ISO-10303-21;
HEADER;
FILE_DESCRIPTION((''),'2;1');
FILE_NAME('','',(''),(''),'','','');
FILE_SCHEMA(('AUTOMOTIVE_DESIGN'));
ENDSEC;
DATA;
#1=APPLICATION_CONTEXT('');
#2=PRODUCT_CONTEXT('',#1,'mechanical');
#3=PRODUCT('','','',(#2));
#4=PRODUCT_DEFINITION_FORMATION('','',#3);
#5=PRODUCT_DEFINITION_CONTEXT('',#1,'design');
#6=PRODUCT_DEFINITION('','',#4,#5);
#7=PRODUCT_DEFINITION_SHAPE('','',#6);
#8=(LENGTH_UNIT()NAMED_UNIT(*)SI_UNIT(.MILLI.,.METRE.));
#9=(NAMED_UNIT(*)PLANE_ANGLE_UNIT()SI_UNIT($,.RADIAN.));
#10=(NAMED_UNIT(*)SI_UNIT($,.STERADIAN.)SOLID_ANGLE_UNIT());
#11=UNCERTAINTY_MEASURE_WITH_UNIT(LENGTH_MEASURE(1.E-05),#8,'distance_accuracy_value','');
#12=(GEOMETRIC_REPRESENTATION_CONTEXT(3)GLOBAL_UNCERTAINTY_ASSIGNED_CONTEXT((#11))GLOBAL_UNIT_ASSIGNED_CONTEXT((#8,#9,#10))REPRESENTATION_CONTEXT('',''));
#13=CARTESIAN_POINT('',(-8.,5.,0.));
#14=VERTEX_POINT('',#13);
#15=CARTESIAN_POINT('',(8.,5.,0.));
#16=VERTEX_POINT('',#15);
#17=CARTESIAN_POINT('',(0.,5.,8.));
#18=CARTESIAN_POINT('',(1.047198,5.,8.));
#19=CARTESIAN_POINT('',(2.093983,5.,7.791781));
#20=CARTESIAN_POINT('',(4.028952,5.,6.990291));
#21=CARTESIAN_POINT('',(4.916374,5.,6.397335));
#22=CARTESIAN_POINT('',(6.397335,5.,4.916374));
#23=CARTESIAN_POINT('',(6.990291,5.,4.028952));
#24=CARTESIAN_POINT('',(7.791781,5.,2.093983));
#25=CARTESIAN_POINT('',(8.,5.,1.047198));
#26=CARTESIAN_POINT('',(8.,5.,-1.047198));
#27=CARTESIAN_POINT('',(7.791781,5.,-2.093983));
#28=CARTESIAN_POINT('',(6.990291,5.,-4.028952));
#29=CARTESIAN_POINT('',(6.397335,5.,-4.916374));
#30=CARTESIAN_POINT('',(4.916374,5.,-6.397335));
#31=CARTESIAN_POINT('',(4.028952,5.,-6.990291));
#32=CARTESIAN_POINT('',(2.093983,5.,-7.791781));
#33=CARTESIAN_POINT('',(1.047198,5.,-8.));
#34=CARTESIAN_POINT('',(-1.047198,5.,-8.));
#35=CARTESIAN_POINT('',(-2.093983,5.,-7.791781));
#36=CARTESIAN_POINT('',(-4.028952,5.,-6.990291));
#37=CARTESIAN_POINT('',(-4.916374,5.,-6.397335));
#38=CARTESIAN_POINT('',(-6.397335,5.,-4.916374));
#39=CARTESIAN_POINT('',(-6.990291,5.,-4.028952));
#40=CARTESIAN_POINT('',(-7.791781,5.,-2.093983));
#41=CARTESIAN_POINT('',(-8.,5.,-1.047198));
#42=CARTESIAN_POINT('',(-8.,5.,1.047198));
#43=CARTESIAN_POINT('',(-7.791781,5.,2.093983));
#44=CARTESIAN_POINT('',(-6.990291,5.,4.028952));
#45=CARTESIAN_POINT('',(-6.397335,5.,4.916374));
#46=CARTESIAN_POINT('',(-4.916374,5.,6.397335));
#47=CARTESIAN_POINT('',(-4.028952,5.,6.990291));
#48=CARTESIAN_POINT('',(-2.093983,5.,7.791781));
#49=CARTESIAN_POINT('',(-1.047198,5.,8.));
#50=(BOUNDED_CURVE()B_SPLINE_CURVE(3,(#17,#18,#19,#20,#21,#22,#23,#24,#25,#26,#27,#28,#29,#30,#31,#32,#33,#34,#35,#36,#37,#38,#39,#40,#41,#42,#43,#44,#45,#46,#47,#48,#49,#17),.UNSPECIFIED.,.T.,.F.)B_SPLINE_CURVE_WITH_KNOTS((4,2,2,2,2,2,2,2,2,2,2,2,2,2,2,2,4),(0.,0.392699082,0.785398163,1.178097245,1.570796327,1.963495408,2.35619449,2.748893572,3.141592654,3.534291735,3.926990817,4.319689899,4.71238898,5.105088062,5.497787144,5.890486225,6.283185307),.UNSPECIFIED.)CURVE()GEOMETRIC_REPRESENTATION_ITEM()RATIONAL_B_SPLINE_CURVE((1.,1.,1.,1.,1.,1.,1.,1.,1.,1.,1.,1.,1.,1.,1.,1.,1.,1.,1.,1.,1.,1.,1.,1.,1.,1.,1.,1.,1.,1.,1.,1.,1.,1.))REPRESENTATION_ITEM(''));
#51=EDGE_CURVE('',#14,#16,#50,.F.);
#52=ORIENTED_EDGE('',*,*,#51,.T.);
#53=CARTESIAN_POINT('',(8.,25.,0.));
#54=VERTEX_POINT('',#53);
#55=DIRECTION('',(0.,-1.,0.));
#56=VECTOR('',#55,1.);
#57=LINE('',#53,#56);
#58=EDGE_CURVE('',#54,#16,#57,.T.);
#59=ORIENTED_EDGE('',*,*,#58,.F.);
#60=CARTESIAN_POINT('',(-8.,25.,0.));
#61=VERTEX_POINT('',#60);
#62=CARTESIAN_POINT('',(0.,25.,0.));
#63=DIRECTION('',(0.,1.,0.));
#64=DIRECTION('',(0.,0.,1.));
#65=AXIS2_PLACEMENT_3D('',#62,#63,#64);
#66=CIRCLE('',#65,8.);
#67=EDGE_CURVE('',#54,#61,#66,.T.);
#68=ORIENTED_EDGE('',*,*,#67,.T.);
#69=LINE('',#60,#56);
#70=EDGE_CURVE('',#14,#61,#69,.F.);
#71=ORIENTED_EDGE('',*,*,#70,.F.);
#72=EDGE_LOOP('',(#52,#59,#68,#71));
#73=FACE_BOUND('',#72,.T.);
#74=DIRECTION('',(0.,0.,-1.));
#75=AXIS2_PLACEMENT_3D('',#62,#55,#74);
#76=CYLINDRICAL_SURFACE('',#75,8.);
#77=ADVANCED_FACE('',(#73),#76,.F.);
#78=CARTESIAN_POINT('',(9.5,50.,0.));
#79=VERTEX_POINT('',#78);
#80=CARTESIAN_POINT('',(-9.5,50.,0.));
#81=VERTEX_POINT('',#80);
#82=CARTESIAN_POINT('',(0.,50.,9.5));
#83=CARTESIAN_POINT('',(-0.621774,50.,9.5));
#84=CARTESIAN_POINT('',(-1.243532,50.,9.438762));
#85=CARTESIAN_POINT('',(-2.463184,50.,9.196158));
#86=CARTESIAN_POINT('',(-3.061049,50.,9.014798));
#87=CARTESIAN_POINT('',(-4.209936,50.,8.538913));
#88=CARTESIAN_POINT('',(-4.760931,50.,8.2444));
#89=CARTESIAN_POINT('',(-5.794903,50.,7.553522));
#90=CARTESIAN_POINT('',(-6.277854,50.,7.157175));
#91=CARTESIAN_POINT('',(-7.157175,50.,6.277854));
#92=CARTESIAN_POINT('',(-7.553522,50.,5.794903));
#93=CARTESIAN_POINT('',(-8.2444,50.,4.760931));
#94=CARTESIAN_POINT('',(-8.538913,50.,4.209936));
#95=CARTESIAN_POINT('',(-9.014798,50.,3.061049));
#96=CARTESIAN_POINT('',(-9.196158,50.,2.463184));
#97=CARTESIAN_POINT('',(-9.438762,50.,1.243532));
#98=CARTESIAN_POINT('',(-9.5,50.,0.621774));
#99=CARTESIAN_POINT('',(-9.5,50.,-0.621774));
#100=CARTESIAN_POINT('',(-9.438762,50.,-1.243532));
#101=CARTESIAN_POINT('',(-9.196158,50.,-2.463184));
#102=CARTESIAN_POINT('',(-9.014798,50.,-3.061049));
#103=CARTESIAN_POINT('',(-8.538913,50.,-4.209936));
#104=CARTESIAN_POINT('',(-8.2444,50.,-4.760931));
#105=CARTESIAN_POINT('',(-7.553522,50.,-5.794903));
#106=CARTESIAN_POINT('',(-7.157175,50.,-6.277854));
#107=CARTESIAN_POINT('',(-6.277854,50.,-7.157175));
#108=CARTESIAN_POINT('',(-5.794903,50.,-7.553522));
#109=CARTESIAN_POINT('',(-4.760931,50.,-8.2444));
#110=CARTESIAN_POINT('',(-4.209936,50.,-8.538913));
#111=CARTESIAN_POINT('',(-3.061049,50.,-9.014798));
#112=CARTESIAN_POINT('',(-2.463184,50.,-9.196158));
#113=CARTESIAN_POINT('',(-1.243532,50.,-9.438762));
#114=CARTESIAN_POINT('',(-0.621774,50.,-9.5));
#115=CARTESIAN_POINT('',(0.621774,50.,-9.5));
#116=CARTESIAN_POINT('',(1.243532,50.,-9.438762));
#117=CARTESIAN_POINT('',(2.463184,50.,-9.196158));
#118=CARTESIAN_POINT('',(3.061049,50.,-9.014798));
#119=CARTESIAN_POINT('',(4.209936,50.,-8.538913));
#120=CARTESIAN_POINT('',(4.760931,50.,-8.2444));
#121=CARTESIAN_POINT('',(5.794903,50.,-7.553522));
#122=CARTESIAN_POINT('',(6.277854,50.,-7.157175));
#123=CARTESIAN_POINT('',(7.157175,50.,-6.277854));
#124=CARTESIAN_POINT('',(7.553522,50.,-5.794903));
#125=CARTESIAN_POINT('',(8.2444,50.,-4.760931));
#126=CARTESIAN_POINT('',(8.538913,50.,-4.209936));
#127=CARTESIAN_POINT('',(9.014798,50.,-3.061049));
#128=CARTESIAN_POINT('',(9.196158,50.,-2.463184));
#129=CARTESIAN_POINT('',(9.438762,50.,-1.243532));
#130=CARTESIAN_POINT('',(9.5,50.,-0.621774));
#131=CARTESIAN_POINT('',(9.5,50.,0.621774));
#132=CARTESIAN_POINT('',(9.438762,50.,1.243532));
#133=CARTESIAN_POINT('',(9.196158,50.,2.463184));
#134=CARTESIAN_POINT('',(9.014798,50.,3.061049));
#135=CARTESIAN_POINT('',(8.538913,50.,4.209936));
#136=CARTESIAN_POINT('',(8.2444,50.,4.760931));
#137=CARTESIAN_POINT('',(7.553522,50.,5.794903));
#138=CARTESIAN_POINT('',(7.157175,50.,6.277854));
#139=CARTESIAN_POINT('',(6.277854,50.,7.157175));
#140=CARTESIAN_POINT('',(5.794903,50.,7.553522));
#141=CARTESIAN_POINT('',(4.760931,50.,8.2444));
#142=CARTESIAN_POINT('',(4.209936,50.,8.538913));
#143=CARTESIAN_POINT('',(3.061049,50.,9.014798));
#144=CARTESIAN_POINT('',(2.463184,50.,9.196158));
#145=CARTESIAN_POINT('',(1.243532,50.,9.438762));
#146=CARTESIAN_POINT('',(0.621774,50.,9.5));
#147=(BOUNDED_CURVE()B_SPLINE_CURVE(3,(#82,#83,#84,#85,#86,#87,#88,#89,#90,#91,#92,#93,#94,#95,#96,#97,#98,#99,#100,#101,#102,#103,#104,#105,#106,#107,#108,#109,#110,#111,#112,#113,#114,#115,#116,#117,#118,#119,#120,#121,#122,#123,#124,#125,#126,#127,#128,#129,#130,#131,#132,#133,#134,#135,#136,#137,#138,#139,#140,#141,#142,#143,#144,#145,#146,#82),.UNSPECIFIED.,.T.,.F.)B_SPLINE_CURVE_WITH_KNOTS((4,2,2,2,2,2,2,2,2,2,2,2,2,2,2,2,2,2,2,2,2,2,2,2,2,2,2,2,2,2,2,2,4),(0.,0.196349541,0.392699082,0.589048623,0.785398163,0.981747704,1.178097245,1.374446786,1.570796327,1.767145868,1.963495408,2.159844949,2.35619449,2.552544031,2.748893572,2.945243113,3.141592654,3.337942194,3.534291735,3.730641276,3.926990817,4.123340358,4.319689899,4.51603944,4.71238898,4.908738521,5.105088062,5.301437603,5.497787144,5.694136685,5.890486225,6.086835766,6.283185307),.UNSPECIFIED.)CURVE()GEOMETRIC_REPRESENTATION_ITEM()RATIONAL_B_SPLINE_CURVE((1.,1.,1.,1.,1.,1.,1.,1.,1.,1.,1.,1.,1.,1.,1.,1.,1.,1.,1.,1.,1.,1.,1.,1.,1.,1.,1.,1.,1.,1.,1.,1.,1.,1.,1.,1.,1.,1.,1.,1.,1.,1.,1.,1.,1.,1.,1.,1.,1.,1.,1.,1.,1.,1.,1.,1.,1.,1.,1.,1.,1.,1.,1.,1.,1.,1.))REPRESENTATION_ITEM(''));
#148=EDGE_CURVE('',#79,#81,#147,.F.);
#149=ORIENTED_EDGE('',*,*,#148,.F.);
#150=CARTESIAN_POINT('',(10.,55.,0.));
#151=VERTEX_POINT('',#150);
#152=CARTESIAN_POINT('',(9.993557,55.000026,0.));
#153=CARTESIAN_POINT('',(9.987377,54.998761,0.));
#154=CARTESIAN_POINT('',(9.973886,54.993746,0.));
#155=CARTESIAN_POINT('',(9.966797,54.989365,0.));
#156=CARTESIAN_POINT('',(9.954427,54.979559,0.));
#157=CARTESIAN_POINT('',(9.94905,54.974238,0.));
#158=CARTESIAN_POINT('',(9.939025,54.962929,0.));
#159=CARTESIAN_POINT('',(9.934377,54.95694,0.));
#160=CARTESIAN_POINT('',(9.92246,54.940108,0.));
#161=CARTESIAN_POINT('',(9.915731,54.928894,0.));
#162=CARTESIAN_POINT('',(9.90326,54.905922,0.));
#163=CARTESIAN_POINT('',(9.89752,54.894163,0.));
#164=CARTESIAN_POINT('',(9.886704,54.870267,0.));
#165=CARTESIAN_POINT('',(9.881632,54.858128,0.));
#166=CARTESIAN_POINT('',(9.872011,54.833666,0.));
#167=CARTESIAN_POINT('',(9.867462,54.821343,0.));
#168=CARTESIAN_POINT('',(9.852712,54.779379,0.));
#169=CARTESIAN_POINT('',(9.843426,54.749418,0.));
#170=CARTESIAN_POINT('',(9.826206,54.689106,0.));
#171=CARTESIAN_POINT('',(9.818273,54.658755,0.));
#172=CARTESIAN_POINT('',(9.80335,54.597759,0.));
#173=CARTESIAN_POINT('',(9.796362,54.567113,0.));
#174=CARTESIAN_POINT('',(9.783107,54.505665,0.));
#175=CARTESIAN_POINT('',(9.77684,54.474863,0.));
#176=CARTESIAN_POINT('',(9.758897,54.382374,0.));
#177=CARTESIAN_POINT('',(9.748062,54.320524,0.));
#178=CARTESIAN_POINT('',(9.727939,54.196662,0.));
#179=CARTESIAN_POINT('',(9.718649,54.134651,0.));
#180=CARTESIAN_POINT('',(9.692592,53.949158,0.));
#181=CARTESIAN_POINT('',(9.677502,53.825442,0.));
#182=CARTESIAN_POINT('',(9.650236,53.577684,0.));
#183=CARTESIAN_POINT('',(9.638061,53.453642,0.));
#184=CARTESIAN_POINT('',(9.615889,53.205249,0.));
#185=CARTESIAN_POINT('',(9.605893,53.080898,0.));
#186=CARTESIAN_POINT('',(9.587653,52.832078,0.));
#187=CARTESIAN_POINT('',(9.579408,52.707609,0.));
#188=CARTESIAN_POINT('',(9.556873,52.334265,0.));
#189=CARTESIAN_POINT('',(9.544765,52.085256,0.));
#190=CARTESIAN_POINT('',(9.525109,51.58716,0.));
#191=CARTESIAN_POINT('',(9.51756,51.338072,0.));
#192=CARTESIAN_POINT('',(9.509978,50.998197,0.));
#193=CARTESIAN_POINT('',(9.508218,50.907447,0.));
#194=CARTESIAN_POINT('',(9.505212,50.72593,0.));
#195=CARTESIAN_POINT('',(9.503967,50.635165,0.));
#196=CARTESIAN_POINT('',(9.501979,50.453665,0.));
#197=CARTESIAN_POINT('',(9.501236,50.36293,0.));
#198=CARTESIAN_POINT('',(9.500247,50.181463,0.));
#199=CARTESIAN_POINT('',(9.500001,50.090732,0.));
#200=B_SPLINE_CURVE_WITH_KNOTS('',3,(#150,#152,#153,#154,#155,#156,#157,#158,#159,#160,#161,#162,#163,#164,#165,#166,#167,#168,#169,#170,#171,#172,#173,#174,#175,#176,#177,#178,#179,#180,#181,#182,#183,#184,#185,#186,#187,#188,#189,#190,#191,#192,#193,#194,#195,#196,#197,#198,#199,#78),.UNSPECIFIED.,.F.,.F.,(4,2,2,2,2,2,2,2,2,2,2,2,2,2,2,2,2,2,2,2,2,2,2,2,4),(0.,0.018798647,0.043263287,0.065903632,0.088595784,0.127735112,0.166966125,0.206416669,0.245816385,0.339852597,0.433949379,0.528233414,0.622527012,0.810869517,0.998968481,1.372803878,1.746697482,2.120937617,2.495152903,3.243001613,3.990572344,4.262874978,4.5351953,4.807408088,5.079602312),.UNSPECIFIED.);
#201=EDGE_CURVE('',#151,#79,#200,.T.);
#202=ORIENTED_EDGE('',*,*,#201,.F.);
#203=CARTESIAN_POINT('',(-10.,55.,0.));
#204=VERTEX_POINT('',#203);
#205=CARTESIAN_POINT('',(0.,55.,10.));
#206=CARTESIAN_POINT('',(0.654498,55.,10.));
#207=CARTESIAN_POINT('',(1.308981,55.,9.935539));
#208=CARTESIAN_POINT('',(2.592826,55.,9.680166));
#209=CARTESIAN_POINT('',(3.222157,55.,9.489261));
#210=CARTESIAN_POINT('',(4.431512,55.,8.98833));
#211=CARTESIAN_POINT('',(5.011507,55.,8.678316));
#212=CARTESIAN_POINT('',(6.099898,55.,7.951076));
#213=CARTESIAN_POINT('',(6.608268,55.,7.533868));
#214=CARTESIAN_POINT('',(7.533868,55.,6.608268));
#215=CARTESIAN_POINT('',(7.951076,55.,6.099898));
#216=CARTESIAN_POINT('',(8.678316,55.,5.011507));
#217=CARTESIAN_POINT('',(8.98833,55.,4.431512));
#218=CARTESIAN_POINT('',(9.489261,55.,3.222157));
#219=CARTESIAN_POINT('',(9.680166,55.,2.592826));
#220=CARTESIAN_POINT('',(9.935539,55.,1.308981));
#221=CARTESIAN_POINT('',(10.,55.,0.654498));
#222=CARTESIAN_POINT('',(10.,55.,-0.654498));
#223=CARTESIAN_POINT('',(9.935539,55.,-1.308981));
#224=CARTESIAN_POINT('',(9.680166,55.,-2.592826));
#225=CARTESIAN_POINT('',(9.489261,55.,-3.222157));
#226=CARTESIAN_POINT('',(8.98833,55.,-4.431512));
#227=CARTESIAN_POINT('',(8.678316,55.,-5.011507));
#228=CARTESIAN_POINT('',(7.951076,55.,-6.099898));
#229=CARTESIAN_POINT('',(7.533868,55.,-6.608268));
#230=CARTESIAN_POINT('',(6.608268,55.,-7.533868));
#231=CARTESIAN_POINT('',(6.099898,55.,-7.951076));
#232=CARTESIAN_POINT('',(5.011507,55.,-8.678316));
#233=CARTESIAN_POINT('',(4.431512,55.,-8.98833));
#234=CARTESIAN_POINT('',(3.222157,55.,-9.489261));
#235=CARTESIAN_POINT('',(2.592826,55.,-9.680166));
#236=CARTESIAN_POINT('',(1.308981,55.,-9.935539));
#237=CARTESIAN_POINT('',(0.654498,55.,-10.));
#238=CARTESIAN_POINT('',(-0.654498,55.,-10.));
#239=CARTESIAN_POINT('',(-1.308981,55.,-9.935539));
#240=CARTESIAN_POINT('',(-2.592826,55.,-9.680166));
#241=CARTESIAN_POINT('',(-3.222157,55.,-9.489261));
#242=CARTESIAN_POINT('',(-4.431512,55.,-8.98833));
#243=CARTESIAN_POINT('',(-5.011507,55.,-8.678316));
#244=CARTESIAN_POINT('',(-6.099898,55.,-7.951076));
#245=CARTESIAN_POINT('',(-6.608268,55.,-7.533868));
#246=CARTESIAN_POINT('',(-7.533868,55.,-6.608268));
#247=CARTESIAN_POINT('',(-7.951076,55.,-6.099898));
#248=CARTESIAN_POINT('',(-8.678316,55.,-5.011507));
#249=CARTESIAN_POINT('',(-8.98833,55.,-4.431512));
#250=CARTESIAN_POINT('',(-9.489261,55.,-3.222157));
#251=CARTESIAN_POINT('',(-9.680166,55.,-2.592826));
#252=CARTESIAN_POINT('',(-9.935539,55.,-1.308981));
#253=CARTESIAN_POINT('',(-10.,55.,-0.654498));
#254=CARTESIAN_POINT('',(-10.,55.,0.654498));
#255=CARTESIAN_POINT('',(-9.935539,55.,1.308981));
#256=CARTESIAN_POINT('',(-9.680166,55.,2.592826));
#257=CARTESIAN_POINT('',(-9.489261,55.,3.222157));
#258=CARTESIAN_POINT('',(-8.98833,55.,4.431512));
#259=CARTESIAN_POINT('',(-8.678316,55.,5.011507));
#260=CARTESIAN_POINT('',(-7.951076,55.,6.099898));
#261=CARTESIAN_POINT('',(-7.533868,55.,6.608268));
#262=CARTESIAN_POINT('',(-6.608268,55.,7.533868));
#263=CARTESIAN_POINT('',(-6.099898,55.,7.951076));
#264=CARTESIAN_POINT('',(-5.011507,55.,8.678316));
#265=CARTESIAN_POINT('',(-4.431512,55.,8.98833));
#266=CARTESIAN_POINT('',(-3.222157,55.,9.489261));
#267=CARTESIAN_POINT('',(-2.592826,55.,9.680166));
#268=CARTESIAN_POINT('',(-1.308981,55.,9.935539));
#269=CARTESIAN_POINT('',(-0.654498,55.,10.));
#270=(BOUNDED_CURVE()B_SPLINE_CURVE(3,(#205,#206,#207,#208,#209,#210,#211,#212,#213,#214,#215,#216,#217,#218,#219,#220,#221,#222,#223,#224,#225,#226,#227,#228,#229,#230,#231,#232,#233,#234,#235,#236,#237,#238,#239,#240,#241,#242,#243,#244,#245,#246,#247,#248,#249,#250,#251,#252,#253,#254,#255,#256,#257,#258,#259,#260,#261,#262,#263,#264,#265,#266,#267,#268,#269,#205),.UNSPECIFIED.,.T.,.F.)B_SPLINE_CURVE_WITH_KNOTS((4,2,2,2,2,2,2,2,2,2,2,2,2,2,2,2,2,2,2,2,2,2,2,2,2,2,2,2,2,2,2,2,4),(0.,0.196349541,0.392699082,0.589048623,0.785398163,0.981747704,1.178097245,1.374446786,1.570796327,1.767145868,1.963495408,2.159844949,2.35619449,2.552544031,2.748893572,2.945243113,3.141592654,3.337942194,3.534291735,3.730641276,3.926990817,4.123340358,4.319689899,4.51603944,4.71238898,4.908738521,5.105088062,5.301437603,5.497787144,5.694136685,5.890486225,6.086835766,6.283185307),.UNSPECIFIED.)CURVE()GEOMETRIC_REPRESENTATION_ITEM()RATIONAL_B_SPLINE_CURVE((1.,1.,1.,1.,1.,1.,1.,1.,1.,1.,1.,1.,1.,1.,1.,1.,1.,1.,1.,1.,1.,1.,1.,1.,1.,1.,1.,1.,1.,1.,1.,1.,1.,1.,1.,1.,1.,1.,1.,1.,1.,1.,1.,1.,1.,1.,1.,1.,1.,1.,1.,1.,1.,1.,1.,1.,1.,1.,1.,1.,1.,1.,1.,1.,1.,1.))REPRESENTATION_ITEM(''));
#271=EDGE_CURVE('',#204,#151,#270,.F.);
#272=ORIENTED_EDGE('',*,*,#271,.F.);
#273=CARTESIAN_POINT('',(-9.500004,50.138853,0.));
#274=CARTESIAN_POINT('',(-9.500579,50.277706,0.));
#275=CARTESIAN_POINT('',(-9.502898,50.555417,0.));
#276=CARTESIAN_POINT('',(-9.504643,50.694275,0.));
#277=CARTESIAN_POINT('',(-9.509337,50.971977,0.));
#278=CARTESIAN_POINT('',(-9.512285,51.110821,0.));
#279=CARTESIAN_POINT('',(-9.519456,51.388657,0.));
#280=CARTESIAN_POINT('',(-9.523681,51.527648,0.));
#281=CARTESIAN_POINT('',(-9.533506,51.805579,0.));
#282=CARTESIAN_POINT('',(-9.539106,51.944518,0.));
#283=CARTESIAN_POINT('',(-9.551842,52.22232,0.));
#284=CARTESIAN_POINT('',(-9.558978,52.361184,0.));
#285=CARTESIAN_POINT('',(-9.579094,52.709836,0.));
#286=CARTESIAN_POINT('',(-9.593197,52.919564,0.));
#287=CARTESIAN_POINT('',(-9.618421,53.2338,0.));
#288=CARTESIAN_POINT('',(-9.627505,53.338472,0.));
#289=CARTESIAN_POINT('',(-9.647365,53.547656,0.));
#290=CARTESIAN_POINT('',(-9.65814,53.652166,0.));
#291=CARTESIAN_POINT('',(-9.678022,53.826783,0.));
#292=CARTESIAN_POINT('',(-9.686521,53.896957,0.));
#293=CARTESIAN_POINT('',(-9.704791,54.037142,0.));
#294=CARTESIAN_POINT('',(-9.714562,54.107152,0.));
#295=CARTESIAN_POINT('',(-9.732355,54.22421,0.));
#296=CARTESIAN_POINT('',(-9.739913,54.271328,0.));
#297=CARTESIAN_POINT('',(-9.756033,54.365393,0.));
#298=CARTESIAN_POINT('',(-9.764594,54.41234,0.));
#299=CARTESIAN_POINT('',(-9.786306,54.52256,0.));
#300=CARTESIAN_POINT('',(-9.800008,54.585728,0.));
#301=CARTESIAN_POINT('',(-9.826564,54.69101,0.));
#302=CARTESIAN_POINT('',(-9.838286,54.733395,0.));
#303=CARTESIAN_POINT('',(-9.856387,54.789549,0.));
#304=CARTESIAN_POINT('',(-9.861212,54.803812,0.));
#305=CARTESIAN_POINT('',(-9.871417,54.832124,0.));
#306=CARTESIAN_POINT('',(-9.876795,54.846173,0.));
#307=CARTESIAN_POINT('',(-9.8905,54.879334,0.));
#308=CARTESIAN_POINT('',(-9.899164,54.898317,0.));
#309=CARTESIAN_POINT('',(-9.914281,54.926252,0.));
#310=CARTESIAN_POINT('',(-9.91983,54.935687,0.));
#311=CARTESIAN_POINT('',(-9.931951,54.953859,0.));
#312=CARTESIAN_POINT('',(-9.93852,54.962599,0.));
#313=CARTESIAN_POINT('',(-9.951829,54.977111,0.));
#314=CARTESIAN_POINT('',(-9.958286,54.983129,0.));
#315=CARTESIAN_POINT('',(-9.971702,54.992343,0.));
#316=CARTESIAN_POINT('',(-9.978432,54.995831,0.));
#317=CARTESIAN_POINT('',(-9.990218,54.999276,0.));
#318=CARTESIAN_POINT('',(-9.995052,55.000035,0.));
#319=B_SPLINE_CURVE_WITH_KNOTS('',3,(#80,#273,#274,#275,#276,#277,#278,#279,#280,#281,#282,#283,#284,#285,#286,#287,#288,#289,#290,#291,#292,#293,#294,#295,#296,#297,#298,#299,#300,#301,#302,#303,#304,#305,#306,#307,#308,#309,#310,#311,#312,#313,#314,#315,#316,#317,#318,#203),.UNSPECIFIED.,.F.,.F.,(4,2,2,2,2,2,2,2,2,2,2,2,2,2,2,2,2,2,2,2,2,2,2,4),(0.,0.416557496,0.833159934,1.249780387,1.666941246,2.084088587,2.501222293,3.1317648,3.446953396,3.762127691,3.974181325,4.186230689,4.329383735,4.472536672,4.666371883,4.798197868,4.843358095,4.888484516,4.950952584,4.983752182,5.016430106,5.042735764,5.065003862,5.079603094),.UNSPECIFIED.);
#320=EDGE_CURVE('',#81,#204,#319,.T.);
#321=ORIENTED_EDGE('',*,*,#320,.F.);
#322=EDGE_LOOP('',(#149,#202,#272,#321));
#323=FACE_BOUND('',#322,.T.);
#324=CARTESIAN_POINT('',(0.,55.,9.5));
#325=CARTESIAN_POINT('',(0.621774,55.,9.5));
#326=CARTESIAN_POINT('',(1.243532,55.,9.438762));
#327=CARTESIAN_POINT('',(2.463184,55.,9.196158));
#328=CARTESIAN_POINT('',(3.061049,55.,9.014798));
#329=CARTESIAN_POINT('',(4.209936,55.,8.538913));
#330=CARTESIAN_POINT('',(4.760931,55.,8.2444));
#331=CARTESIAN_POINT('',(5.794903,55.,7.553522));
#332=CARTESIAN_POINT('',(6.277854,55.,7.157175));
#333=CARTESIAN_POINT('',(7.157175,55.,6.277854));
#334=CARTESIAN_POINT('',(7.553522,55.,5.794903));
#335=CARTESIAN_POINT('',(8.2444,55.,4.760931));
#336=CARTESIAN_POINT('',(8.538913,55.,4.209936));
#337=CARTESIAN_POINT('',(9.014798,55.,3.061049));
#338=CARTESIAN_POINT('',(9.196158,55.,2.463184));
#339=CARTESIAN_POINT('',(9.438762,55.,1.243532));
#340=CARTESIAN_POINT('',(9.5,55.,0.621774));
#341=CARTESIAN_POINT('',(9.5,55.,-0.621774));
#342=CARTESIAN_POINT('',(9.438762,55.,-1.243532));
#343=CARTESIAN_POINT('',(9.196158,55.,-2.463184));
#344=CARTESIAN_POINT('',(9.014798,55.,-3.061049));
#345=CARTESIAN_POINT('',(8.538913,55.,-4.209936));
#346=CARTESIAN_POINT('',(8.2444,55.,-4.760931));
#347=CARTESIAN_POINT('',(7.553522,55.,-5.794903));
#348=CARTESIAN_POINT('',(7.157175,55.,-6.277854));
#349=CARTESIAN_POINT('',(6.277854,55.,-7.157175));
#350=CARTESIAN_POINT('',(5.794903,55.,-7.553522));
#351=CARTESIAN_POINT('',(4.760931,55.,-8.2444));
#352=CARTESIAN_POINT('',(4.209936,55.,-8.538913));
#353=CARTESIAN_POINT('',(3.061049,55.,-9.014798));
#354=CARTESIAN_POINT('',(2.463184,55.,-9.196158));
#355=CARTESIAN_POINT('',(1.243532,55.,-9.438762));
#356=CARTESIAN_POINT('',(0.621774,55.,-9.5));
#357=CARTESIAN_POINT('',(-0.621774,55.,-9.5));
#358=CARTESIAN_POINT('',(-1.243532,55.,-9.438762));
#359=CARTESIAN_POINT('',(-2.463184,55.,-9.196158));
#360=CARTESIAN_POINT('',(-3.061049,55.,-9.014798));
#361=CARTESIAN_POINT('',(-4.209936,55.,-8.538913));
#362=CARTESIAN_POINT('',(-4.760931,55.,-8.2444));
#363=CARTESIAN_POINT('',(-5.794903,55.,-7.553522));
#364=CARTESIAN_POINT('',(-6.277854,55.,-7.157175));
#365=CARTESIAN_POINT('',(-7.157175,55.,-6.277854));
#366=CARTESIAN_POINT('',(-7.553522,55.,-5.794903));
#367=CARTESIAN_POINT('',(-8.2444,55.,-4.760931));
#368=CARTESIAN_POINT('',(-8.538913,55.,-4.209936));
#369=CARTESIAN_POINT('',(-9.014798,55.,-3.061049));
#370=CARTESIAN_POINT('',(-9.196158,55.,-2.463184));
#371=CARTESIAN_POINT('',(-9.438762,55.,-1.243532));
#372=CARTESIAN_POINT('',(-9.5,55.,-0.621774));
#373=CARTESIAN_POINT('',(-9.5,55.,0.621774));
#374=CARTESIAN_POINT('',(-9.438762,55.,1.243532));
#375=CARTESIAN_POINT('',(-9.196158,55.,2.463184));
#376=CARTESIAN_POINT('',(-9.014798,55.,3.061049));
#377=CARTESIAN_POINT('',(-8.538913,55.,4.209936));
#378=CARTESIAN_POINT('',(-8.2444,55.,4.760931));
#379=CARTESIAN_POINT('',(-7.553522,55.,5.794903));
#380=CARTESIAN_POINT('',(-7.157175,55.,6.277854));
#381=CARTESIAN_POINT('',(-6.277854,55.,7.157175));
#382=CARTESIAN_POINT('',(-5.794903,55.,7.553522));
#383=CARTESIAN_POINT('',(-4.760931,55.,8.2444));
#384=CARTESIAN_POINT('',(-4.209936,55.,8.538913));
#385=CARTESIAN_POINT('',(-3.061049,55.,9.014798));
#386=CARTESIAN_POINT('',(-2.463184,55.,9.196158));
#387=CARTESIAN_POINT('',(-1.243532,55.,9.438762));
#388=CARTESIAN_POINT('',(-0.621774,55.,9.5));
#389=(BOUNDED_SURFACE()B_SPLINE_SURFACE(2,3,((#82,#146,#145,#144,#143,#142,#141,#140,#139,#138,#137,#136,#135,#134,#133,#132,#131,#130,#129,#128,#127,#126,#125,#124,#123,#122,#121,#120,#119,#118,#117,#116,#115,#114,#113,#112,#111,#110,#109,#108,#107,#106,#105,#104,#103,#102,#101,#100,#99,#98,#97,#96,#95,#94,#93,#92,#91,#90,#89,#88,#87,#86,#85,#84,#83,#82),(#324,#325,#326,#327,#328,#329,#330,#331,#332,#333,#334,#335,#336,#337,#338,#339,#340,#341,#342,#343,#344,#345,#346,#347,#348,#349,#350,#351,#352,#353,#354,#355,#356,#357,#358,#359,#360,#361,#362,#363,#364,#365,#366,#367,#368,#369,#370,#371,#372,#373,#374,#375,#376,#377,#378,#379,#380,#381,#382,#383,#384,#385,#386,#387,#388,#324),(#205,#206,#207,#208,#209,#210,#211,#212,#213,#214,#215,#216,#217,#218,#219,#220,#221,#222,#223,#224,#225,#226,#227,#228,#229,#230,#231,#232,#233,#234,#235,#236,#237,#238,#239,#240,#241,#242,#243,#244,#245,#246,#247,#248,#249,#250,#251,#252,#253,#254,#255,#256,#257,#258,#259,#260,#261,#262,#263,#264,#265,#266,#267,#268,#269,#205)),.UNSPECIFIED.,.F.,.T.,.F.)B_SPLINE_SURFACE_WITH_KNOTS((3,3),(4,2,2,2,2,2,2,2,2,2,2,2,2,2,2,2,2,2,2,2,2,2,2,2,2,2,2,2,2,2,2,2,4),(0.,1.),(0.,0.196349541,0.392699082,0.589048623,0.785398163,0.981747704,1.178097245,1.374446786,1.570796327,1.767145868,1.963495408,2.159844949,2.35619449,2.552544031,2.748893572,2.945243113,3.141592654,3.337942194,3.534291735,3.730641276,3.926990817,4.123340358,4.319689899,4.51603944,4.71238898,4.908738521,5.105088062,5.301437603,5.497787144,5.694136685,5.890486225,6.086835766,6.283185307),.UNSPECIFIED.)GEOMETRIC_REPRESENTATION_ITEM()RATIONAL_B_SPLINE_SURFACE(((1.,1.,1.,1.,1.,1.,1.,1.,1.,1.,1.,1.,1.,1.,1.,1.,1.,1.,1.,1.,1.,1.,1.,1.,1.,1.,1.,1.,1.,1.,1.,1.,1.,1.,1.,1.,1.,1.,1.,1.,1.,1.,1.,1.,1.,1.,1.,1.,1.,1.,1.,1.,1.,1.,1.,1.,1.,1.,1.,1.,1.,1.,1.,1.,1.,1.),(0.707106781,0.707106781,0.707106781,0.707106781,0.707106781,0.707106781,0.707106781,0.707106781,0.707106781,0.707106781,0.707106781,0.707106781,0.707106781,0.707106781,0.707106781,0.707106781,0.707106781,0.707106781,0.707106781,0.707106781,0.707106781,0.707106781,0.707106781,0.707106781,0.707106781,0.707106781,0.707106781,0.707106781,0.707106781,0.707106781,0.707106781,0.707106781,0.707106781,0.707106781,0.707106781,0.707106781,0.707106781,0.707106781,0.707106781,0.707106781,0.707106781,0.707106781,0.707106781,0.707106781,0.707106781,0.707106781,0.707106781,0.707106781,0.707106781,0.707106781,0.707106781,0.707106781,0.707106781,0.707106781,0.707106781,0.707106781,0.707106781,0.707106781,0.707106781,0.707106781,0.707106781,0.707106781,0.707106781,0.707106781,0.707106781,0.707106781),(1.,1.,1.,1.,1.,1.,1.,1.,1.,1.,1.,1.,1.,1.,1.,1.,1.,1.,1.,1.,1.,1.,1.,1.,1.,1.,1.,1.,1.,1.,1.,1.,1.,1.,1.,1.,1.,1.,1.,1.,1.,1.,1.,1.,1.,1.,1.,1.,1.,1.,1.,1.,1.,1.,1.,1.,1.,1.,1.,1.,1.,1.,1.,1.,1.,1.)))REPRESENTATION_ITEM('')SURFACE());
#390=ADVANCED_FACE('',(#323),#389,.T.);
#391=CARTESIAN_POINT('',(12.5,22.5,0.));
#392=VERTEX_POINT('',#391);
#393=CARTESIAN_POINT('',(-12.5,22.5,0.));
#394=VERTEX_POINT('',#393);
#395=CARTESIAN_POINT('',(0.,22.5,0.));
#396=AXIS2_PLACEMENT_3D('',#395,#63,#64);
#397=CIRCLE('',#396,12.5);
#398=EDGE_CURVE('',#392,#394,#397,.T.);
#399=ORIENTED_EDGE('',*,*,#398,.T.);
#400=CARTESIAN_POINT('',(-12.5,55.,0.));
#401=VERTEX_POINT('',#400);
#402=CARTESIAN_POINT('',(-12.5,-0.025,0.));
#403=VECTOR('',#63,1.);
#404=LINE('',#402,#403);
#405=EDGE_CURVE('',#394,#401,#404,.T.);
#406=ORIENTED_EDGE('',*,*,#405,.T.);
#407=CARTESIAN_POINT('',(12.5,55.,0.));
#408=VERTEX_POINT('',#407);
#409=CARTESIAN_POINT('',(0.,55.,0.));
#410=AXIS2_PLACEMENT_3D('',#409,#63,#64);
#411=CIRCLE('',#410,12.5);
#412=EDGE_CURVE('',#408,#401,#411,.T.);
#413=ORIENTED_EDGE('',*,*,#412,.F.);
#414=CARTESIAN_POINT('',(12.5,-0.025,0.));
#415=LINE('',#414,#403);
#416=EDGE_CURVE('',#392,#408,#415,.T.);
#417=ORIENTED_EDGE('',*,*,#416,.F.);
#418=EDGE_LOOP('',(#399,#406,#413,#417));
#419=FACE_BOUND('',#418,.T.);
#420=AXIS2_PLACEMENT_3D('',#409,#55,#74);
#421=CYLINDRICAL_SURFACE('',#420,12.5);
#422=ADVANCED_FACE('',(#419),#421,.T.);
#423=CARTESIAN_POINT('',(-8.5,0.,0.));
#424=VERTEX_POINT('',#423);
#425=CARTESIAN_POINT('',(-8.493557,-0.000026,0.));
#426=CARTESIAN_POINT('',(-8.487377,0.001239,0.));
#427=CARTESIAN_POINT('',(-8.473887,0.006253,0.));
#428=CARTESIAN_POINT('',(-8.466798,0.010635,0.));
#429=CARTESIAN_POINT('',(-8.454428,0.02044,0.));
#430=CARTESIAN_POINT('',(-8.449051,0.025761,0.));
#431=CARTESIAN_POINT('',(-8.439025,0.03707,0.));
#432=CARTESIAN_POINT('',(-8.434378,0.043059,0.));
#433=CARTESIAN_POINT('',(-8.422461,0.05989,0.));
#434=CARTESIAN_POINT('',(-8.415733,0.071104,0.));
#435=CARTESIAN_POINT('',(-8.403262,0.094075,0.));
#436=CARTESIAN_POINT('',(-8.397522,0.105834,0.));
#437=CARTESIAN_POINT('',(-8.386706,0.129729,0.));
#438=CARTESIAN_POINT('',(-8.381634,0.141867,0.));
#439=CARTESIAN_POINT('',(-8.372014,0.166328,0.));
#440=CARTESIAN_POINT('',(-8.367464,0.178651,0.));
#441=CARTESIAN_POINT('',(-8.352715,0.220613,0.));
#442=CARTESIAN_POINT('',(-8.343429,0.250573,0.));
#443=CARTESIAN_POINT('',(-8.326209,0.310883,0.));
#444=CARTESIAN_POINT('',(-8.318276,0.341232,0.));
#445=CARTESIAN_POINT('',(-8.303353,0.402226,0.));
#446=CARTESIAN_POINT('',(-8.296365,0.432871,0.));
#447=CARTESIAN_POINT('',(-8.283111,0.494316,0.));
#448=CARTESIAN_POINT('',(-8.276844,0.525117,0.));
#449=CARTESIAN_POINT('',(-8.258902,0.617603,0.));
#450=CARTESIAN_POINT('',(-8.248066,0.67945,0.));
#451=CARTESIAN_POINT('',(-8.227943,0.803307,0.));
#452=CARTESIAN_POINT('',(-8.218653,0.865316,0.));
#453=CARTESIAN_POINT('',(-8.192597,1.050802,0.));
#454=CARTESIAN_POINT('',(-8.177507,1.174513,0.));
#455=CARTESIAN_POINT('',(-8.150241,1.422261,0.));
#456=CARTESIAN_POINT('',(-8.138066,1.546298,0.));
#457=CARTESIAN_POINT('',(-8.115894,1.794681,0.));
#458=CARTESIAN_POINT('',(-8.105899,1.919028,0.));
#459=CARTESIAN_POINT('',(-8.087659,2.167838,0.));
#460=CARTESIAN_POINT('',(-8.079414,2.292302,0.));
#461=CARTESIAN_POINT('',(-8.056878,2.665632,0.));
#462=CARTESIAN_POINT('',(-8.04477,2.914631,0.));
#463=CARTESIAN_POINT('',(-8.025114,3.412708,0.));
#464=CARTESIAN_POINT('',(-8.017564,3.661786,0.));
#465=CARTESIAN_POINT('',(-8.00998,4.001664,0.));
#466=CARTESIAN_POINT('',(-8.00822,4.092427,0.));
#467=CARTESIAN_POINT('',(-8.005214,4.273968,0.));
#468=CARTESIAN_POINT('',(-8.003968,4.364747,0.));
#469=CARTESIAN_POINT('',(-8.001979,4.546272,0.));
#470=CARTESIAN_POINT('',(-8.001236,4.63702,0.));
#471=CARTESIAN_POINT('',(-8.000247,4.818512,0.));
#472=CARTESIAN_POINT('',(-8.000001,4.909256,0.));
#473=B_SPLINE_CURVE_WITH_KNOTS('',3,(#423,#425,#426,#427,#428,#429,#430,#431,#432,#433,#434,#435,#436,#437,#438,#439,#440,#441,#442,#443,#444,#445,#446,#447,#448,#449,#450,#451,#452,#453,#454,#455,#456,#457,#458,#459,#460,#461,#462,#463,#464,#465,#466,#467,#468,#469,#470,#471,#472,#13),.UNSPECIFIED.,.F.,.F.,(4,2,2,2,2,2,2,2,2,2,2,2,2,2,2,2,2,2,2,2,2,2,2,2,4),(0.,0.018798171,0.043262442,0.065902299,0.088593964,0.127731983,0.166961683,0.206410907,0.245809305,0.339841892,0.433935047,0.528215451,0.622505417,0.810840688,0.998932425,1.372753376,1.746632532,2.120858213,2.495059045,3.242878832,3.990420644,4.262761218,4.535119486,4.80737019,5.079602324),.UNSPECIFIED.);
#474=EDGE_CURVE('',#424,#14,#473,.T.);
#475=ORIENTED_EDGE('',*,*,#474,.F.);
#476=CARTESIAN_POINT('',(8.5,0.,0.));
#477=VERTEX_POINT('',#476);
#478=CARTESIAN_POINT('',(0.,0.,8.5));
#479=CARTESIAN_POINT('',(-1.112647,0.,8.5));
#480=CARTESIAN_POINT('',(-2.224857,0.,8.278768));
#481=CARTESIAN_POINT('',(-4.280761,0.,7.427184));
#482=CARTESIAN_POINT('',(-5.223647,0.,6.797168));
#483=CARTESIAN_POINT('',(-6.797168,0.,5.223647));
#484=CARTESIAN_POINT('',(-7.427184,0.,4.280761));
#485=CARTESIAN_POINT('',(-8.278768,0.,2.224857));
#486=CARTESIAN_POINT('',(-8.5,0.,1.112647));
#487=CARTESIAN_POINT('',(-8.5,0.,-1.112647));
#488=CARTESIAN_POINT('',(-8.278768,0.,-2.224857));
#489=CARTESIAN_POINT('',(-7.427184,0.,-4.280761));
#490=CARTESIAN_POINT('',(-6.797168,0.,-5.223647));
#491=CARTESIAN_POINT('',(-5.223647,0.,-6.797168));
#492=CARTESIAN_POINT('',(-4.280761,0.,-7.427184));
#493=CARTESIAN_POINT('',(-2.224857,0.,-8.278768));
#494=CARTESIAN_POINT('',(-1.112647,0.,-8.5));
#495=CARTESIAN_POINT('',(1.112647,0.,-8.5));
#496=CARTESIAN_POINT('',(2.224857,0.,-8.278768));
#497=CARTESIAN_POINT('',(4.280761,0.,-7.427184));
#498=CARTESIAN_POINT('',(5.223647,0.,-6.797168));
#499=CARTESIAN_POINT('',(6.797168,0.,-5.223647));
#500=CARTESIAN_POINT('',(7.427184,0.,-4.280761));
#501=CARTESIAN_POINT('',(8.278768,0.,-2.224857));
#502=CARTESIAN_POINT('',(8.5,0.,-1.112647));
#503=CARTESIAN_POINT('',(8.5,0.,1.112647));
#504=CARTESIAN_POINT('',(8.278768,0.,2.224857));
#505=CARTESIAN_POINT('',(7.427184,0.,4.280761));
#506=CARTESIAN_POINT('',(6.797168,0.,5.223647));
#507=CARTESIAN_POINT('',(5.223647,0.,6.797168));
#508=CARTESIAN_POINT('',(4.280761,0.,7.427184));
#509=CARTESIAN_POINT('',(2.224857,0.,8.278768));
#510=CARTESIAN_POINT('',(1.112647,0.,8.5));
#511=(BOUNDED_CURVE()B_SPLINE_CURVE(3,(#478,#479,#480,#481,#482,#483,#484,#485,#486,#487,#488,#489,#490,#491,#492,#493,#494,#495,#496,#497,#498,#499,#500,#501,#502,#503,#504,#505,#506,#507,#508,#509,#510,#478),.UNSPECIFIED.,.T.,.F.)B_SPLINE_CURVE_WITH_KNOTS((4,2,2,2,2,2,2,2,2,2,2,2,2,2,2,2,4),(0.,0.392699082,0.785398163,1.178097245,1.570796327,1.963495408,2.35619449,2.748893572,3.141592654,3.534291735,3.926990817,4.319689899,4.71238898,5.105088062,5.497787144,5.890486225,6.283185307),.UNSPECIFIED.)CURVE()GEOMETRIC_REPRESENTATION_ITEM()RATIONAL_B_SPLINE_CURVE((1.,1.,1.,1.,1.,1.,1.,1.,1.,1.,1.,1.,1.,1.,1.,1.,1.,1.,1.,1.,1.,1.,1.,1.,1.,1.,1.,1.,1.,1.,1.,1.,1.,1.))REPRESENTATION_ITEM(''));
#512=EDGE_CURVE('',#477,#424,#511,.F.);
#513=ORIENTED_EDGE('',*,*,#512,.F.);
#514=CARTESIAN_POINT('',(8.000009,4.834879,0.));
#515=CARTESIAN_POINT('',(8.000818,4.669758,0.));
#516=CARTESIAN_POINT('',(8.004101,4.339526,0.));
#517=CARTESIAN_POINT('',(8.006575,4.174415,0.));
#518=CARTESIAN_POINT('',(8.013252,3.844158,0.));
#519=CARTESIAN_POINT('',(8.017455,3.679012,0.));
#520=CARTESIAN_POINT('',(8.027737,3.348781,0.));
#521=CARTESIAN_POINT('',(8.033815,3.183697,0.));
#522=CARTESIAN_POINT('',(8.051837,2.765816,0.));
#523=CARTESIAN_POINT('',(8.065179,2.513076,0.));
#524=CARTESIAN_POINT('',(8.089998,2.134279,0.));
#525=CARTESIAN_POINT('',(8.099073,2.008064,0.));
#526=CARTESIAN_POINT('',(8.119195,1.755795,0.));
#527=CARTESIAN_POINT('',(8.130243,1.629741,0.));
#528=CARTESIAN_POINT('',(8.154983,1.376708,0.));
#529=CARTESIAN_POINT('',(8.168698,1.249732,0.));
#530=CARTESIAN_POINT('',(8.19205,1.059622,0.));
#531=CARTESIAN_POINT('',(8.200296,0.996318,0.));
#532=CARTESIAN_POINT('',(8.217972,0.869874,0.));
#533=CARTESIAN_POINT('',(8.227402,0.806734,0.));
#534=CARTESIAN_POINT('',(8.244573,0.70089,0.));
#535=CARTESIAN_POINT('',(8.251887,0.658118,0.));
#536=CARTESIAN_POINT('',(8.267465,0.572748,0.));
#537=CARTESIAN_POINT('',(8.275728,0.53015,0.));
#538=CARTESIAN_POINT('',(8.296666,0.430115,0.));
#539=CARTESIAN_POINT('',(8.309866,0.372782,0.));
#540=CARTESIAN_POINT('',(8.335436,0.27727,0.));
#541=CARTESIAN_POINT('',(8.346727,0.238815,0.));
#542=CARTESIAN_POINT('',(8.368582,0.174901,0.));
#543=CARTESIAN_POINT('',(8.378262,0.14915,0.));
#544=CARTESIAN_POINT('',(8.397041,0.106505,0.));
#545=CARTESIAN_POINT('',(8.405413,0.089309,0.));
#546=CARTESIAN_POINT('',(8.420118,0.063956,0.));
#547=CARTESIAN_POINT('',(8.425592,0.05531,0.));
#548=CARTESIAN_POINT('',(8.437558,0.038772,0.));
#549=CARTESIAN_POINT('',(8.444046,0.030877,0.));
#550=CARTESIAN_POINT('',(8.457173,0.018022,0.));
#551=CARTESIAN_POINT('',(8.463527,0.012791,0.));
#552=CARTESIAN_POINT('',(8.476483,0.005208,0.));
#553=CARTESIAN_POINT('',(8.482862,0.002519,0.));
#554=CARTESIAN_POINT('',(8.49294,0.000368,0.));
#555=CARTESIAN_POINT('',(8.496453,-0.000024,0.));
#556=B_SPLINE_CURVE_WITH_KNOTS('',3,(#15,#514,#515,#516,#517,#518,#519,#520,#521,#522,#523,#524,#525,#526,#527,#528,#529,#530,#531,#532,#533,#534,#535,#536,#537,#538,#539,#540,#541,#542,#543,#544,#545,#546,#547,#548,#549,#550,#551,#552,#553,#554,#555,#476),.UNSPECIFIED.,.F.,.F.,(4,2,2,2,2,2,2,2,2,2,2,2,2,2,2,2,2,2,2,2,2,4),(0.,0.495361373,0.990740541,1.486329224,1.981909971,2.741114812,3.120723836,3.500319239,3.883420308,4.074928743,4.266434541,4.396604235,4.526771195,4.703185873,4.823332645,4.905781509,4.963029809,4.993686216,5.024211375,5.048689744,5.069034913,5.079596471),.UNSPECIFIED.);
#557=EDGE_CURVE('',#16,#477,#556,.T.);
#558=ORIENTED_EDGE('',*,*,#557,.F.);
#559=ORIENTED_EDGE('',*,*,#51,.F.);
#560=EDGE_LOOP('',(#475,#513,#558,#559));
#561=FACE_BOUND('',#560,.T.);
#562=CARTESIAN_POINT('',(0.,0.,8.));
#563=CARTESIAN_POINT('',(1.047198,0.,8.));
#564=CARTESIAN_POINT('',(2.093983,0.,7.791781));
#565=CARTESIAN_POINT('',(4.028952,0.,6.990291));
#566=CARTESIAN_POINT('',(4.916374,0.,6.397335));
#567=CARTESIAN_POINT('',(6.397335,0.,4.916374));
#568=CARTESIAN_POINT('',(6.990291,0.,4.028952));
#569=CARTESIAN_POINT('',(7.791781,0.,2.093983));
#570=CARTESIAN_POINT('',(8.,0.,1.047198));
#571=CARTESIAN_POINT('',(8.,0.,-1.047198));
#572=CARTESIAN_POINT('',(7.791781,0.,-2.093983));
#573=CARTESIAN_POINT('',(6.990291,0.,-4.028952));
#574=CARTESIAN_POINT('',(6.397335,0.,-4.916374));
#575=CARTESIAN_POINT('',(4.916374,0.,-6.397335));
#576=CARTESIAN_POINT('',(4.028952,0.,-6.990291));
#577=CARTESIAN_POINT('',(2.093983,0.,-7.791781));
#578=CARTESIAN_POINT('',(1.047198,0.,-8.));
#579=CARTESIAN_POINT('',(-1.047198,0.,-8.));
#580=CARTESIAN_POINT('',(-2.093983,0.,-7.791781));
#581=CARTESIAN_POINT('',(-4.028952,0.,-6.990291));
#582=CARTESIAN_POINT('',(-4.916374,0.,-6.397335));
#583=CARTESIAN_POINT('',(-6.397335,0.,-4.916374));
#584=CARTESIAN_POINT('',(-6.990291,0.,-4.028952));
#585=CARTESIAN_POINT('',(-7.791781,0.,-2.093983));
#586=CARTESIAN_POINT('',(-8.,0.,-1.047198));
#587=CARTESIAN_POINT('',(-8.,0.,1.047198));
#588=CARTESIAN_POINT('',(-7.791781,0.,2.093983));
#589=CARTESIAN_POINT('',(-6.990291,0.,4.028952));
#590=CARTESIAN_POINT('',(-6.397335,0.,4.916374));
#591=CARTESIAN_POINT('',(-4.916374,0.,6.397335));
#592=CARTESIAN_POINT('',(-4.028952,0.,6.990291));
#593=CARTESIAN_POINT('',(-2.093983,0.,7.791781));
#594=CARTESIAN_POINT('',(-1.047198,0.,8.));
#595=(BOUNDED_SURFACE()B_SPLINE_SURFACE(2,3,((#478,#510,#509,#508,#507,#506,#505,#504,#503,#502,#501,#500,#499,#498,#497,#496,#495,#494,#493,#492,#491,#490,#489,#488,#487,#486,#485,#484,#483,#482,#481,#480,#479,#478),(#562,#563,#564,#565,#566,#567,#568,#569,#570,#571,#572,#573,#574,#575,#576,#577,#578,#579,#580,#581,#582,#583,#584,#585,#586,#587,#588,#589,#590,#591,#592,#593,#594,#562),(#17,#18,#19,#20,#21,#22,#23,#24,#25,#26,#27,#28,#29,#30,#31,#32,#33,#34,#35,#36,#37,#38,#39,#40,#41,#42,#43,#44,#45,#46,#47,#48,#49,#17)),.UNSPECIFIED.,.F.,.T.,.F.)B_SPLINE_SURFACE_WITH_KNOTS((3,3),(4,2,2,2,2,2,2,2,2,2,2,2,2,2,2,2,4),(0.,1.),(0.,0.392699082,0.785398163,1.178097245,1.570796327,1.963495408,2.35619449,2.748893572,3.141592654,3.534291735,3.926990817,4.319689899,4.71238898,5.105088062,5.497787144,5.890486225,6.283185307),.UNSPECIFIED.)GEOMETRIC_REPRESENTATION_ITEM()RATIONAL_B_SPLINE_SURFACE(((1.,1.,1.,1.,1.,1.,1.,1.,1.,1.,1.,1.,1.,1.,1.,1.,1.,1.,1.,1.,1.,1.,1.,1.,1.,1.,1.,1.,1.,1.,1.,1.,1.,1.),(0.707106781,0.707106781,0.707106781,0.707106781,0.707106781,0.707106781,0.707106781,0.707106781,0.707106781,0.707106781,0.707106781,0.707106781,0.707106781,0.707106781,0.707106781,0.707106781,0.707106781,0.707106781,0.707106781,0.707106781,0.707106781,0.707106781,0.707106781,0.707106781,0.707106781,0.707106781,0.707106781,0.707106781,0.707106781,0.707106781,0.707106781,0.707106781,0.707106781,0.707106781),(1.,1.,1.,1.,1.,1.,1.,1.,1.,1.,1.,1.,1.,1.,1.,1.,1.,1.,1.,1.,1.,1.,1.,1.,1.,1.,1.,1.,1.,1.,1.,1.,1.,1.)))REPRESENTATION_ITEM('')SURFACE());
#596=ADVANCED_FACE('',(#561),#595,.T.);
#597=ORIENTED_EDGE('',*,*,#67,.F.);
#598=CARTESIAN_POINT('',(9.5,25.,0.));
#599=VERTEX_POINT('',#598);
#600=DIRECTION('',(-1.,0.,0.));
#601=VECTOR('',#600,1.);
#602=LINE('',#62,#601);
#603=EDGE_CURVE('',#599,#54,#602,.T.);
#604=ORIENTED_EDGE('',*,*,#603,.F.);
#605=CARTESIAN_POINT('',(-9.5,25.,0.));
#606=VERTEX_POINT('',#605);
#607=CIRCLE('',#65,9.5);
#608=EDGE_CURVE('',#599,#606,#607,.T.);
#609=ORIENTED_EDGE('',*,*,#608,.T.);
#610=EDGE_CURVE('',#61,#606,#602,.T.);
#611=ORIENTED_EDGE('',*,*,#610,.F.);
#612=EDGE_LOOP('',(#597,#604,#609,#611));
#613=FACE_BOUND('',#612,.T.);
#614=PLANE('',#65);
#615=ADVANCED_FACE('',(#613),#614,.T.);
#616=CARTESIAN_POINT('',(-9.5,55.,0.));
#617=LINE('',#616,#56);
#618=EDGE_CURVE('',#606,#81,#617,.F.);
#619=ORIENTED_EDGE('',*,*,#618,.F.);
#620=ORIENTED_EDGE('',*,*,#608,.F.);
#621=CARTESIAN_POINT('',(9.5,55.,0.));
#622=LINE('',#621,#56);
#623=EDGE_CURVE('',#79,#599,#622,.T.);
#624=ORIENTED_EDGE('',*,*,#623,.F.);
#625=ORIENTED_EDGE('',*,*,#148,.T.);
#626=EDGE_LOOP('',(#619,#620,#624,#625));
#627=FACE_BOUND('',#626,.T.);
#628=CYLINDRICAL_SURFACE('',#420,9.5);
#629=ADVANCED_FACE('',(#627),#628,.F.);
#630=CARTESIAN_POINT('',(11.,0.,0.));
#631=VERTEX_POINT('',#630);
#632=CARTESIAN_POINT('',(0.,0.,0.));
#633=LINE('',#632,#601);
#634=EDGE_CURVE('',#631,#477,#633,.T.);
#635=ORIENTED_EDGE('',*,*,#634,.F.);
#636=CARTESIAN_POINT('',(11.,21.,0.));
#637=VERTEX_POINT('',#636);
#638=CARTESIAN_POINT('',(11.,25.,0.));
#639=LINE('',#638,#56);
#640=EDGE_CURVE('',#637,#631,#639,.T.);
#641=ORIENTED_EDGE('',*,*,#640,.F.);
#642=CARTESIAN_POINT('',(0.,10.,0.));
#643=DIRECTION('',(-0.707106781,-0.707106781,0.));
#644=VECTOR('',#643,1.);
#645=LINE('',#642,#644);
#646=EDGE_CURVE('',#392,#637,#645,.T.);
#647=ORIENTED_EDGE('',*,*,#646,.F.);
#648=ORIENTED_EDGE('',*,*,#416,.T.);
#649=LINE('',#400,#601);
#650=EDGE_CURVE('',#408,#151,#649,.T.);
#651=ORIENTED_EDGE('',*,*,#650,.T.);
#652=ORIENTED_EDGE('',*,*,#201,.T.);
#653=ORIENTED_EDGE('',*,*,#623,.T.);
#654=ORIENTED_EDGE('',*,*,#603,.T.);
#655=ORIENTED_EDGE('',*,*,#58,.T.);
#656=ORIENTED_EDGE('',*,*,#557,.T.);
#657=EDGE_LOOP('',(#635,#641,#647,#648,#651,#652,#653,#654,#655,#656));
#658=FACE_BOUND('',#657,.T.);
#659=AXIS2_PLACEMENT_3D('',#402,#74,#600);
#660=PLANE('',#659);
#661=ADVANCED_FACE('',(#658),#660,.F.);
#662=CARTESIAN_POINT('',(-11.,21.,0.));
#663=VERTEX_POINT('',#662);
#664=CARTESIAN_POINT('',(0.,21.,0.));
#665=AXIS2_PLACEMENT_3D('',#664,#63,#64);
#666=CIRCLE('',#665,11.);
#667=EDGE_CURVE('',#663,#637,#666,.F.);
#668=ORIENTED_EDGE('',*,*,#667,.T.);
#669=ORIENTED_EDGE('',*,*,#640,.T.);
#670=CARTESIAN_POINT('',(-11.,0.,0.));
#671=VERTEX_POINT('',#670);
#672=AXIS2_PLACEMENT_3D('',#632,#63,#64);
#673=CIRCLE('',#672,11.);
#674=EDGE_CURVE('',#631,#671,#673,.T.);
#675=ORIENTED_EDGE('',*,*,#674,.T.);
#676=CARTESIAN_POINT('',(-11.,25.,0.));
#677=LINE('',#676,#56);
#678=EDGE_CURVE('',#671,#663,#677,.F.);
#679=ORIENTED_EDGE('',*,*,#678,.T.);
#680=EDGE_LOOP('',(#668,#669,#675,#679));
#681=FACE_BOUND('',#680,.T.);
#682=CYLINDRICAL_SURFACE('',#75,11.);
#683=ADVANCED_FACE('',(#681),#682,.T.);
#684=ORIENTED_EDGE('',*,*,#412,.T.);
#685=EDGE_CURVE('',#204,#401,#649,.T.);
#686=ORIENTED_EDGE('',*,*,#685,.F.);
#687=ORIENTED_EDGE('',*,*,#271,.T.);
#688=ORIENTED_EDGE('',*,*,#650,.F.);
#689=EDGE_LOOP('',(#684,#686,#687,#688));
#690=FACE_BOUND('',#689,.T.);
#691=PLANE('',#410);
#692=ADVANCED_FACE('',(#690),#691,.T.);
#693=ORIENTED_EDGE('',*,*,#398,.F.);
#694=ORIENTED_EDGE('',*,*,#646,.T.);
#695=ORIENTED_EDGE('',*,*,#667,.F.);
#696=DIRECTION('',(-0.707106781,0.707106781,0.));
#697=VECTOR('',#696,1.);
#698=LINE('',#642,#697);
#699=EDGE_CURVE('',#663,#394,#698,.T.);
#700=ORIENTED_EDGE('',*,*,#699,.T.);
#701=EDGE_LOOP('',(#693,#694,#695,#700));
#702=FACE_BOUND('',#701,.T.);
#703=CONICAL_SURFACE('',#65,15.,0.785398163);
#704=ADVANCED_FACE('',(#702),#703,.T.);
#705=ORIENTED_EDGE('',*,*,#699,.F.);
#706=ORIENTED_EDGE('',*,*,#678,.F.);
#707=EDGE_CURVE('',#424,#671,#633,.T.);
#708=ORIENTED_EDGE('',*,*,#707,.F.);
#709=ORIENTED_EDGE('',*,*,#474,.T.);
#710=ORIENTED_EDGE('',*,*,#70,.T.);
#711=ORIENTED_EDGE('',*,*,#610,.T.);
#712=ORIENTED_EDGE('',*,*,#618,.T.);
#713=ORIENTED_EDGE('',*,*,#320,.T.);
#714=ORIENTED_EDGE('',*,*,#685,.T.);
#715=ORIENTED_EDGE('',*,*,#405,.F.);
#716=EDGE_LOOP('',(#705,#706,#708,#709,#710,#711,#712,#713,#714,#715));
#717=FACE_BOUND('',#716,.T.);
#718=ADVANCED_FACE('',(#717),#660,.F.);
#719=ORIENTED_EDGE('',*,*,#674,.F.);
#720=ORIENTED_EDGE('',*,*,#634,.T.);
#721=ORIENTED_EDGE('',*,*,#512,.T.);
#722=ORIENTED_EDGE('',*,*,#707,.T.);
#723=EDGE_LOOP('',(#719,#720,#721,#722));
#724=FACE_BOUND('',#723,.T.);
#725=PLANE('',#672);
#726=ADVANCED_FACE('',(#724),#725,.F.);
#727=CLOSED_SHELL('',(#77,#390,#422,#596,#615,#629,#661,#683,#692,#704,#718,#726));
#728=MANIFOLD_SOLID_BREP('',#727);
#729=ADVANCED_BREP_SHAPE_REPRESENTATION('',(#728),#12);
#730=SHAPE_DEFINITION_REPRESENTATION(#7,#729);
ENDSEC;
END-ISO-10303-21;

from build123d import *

# Parameters (mm, degrees)
SKETCH_1_R          = 11
SKETCH_1_R_2        = 8
EXTRUDE_1_DEPTH     = 25
SKETCH_2_R          = 12.5
SKETCH_2_R_2        = 9.5
EXTRUDE_2_DEPTH     = 30
CHAMFER_2_SIZE      = 4
FILLET_1_SIZE       = 0.5
FILLET_1_SIZE_2     = 5
FILLET_2_SIZE       = 0.5
FILLET_2_SIZE_2     = 5
SKETCH_3_W          = 25
SKETCH_3_H          = 12.5
CUT_EXTRUDE_2_DEPTH = 58.771100137


with BuildPart() as part:
    # 草图1 → 凸台-拉伸1 (new body)
    with BuildSketch(Plane(origin=(0, 0, 0), x_dir=(1, 0, 0), z_dir=(0, 1, 0))):
        with Locations(Location((0, 0, 0), (0, 0, 270))):
            Circle(SKETCH_1_R)
        with Locations(Location((0, 0, 0), (0, 0, 270))):
            Circle(SKETCH_1_R_2, mode=Mode.SUBTRACT)
    extrude(amount=EXTRUDE_1_DEPTH)

    # 草图2 → 凸台-拉伸2 (add)
    with BuildSketch(Plane(origin=(0, 25, 0), x_dir=(1, 0, 0), z_dir=(0, 1, 0))):
        with Locations(Location((0, 0, 0), (0, 0, 270))):
            Circle(SKETCH_2_R)
        with Locations(Location((0, 0, 0), (0, 0, 270))):
            Circle(SKETCH_2_R_2, mode=Mode.SUBTRACT)
    extrude(amount=EXTRUDE_2_DEPTH)

    # 倒角2
    # the kernel refuses this chamfer: 4 mm, written as the material it adds along each edge
    with BuildSketch(Plane(origin=(0, 25, 0), x_dir=(0, 0, 1), z_dir=(-1, 0, 0))) as chamfer_2_piece_1_section:
        Polygon((11, -CHAMFER_2_SIZE), (11 + CHAMFER_2_SIZE, 0), (11, 0), align=None)
    chamfer_2_piece_1 = revolve(axis=Axis((0, 25, 0), (0, 1, 0)), mode=Mode.PRIVATE)
    chamfer_2_piece_1 = chamfer_2_piece_1 & Plane(origin=(0, 21.745250117, 0), x_dir=(0, 0, 1), z_dir=(0, -1, 0)) * Cylinder(12.5, 60, mode=Mode.PRIVATE)
    add(chamfer_2_piece_1)

    # 圆角1
    # an asymmetric fillet: 5, 0.5 mm, written as the material it takes off along each edge
    with BuildSketch(Plane(origin=(0, 0, 0), x_dir=(0, 0, 1), z_dir=(-1, 0, 0))) as fillet_1_piece_1:
        with BuildLine():
            Bezier((8 + FILLET_1_SIZE, 0), (8, 0), (8, FILLET_1_SIZE_2), weights=[1, 0.707106781, 1])
            Line((8, FILLET_1_SIZE_2), (8, 0))
            Line((8, 0), (8 + FILLET_1_SIZE, 0))
        make_face()
    revolve(axis=Axis((0, 0, 0), (0, 1, 0)), mode=Mode.SUBTRACT)

    # 圆角2
    # an asymmetric fillet: 5, 0.5 mm, written as the material it takes off along each edge
    with BuildSketch(Plane(origin=(0, 55, 0), x_dir=(0, 0, 1), z_dir=(-1, 0, 0))) as fillet_2_piece_1:
        with BuildLine():
            Bezier((9.5 + FILLET_2_SIZE, 0), (9.5, 0), (9.5, -FILLET_2_SIZE_2), weights=[1, 0.707106781, 1])
            Line((9.5, -FILLET_2_SIZE_2), (9.5, 0))
            Line((9.5, 0), (9.5 + FILLET_2_SIZE, 0))
        make_face()
    revolve(axis=Axis((0, 55, 0), (0, 1, 0)), mode=Mode.SUBTRACT)

    # 草图3 → 切除-拉伸2 (cut, through all)
    with BuildSketch(Plane(origin=(0, 55, 0), x_dir=(1, 0, 0), z_dir=(0, 1, 0))):
        with Locations((0, -6.25)):
            Rectangle(SKETCH_3_W, SKETCH_3_H)
    extrude(amount=-CUT_EXTRUDE_2_DEPTH, mode=Mode.SUBTRACT)


solid = part.part
